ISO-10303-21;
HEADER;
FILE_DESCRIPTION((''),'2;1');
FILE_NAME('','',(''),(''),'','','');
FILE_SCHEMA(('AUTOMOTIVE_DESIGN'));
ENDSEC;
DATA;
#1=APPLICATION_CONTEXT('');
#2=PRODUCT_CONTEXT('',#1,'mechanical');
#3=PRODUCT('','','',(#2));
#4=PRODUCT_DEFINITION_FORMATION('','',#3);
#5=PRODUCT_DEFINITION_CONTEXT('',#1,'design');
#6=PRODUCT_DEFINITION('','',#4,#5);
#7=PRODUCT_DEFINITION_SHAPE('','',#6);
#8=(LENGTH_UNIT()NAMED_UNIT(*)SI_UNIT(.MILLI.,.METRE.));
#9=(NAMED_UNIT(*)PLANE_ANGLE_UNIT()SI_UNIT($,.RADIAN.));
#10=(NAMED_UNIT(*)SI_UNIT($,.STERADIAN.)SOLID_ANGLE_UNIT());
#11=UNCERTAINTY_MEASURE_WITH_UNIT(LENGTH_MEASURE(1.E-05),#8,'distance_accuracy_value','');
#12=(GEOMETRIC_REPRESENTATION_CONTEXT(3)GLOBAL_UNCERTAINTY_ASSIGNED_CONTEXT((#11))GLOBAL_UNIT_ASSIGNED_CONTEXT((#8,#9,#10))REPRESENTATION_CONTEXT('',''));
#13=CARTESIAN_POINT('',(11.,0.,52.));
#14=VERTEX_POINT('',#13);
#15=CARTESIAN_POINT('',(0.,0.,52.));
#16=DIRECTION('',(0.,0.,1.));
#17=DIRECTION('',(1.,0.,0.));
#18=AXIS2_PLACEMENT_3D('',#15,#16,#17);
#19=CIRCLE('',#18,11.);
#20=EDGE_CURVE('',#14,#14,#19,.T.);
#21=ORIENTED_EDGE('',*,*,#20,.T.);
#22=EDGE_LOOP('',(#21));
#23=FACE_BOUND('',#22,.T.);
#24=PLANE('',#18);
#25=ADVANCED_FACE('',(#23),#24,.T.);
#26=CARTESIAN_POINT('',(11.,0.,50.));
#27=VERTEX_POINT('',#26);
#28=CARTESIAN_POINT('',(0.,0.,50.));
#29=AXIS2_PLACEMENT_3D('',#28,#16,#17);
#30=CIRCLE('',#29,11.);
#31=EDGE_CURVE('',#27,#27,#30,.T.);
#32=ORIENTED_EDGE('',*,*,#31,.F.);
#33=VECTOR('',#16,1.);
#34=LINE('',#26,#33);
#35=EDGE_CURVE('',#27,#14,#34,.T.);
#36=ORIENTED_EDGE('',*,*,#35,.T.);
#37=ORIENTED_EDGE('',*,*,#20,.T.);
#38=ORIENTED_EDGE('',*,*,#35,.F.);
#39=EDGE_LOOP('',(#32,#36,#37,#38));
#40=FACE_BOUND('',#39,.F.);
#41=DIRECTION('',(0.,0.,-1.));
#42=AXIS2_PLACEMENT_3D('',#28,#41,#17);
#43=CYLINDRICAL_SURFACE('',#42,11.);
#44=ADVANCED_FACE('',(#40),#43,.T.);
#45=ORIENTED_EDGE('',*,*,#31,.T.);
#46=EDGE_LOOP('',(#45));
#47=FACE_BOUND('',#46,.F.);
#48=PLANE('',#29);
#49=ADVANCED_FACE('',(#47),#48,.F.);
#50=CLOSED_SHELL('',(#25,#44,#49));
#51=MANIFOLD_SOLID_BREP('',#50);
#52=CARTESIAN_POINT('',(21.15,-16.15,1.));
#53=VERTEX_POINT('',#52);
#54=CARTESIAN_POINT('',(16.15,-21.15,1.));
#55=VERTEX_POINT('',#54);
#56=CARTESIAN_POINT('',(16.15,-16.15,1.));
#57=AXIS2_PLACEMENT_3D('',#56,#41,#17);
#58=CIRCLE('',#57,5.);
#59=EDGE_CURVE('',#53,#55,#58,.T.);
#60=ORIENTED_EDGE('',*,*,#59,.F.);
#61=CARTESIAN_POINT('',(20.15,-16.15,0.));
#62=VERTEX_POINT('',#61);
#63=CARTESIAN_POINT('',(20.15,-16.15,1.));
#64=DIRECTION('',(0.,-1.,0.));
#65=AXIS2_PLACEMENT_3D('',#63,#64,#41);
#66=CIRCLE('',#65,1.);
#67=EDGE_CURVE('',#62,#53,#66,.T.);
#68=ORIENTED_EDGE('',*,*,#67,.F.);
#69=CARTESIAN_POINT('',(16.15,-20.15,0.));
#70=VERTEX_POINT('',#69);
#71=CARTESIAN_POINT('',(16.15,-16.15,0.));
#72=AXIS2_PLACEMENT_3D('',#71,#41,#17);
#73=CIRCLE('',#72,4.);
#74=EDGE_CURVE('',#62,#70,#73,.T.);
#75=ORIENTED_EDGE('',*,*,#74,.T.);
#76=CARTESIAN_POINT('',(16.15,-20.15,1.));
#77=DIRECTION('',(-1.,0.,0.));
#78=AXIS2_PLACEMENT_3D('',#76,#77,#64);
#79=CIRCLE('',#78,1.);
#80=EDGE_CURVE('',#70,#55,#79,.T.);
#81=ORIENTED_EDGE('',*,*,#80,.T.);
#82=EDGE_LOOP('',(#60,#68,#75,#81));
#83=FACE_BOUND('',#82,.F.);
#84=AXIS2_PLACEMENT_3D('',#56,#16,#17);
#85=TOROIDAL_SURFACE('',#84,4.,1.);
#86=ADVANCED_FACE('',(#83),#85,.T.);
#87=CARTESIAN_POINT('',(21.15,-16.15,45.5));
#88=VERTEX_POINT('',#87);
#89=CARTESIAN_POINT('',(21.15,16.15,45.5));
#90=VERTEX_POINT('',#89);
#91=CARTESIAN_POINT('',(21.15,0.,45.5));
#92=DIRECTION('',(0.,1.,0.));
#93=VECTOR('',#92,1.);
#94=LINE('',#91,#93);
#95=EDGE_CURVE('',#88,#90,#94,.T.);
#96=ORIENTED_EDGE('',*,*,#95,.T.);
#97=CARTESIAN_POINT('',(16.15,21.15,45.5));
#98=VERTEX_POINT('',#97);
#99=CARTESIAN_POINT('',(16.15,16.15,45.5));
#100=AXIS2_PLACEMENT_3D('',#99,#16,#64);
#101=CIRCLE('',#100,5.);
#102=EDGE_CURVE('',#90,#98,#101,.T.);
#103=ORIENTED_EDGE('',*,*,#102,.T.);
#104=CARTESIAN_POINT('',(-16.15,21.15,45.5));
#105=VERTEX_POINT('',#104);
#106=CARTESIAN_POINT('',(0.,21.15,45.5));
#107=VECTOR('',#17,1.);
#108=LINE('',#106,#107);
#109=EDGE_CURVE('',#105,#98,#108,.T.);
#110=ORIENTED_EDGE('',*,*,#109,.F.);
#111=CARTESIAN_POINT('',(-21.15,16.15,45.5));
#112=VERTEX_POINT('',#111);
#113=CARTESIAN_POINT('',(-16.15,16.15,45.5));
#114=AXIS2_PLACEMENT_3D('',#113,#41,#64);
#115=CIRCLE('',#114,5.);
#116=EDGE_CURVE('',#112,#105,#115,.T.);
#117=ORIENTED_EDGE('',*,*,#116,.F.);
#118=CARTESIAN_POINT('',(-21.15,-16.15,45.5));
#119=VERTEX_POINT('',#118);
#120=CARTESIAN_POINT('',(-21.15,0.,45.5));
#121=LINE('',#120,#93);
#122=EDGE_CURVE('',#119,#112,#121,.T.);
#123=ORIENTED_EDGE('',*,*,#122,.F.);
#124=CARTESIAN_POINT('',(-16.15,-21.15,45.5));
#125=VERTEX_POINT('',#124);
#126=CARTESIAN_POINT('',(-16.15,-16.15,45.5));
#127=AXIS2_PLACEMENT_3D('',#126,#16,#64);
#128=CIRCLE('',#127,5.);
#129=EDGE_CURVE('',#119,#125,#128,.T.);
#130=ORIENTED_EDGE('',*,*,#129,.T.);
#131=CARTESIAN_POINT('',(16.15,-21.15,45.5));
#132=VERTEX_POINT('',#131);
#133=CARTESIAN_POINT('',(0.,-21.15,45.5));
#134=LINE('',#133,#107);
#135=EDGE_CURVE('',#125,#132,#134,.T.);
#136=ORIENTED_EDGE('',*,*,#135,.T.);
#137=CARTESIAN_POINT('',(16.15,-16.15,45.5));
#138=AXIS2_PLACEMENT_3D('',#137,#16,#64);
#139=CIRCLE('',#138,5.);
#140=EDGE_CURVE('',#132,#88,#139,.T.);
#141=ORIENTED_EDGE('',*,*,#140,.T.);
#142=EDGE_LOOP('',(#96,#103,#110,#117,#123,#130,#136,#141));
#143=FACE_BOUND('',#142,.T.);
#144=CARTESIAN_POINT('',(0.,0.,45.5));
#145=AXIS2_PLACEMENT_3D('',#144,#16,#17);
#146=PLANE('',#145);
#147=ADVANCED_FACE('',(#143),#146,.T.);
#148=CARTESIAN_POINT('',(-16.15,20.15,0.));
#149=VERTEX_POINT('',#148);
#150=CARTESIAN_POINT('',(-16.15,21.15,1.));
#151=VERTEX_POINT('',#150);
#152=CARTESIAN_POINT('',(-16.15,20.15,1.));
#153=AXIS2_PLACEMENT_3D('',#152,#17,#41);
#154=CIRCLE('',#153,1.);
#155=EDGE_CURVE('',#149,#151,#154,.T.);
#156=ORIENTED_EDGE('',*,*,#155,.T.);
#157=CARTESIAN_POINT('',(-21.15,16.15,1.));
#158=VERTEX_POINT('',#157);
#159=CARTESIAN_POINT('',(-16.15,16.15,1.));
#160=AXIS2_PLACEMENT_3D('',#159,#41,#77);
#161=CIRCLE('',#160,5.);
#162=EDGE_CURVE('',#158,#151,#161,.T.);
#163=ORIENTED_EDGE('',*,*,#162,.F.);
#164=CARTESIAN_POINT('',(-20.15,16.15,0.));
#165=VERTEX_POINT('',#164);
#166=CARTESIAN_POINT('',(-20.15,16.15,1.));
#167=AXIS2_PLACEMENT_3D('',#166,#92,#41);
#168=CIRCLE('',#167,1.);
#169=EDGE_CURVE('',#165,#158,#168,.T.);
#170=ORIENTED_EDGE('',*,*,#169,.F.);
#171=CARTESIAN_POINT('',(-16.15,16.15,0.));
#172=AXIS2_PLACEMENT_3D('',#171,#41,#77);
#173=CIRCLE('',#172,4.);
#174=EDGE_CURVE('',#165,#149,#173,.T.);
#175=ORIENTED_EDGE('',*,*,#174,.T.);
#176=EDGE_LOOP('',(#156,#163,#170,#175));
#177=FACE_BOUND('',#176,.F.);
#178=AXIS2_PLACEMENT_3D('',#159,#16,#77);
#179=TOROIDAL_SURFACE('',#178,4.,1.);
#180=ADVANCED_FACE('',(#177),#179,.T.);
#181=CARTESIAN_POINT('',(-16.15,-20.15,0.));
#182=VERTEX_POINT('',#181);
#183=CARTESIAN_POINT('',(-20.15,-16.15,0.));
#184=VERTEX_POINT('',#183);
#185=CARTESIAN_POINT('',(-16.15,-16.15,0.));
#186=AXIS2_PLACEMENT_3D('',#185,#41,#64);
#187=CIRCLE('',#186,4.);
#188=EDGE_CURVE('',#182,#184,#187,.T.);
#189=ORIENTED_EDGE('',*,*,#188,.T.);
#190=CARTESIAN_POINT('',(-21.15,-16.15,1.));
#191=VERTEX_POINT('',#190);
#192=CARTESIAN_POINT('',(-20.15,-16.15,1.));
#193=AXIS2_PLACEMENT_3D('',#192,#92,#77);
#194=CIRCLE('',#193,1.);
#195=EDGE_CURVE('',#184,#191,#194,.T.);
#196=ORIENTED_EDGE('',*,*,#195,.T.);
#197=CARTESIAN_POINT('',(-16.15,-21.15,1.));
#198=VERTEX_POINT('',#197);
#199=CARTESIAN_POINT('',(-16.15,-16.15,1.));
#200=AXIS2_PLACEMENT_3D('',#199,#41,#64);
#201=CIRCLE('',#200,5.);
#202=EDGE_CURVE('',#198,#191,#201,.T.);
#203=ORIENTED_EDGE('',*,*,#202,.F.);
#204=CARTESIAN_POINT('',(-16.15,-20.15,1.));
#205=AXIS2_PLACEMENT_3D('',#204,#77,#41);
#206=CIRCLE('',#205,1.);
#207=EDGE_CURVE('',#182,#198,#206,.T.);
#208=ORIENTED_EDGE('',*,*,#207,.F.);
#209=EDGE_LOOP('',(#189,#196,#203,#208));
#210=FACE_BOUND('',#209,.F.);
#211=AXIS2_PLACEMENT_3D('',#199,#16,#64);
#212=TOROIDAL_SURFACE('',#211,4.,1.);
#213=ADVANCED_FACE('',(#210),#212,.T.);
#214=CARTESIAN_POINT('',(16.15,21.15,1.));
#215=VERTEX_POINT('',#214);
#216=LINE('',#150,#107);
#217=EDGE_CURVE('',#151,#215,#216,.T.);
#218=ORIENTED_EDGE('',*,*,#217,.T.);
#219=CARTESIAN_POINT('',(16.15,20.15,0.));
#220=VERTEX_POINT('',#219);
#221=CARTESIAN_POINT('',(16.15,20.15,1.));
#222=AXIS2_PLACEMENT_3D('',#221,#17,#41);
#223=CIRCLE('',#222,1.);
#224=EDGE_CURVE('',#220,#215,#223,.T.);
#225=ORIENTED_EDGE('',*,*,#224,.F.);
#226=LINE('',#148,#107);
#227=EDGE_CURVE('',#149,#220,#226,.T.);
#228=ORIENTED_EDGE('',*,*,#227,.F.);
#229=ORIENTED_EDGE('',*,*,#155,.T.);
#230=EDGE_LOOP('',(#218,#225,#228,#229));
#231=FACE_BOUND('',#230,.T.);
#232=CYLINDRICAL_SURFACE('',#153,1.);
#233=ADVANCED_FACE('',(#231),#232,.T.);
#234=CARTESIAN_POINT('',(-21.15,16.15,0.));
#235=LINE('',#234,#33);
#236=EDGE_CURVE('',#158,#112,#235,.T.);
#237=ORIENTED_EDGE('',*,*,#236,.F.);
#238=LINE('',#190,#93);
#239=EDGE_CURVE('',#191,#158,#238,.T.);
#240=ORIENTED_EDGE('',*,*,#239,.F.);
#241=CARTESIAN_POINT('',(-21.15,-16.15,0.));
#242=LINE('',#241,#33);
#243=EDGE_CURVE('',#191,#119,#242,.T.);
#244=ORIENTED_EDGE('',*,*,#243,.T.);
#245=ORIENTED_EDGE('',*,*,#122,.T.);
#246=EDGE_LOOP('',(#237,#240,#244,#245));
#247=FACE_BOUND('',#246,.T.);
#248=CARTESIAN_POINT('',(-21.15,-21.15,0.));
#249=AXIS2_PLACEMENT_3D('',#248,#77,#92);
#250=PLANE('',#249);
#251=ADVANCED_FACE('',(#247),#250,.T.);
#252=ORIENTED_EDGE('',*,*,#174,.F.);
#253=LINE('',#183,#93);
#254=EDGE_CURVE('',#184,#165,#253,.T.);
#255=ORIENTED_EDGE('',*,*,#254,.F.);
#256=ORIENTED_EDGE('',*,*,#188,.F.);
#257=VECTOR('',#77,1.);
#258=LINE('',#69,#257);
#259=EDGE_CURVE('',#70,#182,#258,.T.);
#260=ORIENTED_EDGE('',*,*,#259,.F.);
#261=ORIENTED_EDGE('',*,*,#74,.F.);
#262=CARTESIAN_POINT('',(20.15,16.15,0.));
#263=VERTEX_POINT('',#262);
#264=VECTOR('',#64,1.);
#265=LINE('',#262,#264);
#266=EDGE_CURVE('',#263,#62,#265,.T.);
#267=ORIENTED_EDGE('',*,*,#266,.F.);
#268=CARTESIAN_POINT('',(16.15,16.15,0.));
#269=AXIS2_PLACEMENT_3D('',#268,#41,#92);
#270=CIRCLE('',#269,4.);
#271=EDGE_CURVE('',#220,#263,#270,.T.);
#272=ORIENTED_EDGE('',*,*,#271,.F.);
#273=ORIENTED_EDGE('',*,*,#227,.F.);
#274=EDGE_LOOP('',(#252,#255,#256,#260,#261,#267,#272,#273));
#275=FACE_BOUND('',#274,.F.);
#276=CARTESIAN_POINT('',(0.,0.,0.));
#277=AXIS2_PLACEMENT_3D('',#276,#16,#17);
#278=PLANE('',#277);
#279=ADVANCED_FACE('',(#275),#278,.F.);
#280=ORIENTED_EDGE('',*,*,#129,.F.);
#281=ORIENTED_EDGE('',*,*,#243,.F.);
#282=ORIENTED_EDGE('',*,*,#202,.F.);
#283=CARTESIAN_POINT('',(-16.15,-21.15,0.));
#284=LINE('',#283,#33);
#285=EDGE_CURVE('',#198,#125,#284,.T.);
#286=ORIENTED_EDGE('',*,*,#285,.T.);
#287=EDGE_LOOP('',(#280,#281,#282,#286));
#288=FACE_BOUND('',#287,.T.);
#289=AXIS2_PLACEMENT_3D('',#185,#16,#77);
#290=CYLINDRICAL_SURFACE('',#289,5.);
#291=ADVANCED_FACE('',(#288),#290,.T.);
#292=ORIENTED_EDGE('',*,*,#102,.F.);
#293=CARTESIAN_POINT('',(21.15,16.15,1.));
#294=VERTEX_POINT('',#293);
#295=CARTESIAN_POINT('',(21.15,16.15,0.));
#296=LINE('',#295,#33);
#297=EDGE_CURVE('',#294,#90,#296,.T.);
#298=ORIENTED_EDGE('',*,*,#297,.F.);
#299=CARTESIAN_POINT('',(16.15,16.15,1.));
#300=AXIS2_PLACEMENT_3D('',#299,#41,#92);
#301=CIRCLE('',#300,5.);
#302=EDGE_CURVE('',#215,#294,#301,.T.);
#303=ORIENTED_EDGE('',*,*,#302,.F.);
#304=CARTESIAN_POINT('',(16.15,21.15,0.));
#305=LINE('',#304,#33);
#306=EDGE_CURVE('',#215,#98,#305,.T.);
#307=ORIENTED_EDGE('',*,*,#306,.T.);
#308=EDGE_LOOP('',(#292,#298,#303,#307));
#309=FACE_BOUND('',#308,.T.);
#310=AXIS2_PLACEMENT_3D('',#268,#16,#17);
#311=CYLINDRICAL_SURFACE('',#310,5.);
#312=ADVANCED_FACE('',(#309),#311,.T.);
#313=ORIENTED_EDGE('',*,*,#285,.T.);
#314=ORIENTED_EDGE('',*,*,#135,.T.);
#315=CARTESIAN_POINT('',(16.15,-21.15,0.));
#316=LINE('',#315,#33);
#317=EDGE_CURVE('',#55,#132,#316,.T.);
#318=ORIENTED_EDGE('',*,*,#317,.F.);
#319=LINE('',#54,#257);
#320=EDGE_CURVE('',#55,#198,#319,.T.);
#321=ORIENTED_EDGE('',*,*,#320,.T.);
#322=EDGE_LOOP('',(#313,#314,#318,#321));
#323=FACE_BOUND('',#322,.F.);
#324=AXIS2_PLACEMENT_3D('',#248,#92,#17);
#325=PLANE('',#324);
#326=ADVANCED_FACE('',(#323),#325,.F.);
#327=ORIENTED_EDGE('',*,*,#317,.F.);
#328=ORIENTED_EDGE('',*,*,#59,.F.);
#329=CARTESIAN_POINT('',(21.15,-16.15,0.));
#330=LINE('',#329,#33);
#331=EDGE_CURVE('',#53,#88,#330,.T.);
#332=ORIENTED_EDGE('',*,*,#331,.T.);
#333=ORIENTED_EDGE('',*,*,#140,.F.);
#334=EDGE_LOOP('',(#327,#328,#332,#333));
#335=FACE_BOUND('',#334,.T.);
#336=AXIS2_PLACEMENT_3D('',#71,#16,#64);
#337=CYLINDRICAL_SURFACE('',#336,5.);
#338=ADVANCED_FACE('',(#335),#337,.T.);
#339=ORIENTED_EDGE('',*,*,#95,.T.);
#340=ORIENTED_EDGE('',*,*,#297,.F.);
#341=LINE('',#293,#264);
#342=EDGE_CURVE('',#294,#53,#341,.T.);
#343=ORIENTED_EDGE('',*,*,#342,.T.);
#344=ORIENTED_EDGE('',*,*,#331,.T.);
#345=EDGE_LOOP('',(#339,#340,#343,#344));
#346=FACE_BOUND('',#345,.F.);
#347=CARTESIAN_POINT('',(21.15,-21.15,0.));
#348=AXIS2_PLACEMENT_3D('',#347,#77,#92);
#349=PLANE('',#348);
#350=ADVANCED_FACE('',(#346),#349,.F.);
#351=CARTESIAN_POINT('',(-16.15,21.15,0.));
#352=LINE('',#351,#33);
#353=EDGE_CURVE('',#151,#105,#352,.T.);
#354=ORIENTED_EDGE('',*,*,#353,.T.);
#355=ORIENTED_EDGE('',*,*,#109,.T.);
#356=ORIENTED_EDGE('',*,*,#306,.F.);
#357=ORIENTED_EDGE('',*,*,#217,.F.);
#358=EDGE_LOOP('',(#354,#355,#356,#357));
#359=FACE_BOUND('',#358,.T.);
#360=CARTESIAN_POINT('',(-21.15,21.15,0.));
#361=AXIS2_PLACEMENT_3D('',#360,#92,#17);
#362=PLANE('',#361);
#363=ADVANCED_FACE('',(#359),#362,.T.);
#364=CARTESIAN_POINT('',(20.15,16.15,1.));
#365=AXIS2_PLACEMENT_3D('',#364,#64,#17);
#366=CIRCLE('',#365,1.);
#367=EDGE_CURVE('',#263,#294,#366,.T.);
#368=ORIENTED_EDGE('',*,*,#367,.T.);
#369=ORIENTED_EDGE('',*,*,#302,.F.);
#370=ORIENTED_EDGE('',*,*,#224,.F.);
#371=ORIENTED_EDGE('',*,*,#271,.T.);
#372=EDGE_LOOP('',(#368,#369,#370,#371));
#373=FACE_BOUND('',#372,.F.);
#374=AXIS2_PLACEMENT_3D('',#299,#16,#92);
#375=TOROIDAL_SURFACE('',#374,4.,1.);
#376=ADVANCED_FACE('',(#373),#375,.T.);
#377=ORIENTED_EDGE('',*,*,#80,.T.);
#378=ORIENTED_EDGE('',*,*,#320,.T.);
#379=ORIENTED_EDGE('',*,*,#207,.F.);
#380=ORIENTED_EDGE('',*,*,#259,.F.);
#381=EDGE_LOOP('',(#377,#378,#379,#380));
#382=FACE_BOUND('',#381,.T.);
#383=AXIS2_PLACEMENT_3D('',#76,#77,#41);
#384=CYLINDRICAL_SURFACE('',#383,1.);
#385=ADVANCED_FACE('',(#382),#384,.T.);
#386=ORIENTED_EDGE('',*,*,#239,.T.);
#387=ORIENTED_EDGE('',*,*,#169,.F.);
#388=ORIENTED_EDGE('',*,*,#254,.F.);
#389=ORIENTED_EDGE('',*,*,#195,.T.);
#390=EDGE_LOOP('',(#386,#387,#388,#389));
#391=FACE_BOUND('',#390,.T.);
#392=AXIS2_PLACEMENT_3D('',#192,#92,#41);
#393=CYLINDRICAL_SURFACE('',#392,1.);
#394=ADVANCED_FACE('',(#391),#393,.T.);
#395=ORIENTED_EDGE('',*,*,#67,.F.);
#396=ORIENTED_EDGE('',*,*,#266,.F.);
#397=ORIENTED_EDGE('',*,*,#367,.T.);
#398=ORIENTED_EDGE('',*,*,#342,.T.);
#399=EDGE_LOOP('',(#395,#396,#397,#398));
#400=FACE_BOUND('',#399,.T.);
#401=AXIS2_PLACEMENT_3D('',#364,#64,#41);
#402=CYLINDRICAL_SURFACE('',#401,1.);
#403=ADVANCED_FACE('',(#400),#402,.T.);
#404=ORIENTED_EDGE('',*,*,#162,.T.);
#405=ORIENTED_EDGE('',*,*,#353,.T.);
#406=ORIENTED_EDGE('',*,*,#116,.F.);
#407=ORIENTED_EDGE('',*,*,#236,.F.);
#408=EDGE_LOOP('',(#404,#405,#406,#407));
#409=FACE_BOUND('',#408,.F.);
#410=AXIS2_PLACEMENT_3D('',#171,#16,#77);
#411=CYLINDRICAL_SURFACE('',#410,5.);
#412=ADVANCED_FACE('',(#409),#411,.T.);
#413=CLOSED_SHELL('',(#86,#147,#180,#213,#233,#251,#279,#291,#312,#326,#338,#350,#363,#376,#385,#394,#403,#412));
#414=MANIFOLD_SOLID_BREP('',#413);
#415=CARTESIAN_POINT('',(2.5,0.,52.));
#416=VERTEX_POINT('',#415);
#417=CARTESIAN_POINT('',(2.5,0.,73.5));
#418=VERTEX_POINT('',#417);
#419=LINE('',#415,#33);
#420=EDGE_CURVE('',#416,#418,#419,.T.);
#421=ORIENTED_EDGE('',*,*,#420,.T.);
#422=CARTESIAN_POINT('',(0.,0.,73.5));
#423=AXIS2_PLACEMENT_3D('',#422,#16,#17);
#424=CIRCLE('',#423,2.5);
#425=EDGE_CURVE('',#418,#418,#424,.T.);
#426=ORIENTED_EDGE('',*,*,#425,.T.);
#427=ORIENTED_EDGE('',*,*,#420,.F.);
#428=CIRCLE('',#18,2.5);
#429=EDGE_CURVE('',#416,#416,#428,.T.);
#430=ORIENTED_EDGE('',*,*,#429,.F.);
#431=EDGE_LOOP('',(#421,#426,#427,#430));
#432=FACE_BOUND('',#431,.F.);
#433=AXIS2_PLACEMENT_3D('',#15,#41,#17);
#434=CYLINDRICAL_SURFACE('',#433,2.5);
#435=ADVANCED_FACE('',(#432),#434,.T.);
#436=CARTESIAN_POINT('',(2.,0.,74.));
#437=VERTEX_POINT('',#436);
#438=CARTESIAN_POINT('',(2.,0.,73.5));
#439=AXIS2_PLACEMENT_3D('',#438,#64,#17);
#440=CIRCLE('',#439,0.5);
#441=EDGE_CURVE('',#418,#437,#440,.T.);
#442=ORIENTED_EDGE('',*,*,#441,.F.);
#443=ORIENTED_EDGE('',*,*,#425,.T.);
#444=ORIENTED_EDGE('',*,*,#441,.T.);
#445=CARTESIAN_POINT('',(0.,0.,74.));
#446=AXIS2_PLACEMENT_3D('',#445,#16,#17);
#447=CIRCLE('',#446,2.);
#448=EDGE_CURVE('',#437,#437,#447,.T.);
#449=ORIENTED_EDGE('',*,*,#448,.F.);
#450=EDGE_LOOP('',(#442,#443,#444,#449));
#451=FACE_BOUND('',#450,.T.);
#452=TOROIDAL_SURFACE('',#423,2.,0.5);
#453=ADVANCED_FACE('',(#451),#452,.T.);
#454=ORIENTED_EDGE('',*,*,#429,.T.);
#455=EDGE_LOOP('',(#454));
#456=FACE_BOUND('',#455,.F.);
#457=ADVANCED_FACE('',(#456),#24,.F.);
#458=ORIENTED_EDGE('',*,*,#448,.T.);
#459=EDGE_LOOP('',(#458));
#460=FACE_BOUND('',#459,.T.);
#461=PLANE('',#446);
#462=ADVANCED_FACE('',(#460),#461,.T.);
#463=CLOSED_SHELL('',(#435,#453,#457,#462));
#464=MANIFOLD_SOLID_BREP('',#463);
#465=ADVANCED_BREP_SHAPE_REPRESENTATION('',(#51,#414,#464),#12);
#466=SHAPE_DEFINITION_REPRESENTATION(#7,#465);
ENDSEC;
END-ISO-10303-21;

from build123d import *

# Parameters (mm, degrees)
F1_W     = 42.3
F1_H     = 42.3
F1_R     = 1.5
F1_R_2   = 11
F1_R_3   = 2.5
F2_DEPTH = 45.5
F3_START = 50
F3_DEPTH = 2
F4_START = 52
F4_DEPTH = 22
F5_R     = 0.5
F6_R     = 5
F7_R     = 1


with BuildPart() as f2:
    # F1 (on Top) → F2 (new body)
    with BuildSketch(Plane.XY):
        Rectangle(F1_W, F1_H)
        with Locations((-15.5, -15.5)):
            Circle(F1_R, mode=Mode.SUBTRACT)
        with Locations((15.5, -15.5)):
            Circle(F1_R, mode=Mode.SUBTRACT)
        with Locations((-15.5, 15.5)):
            Circle(F1_R, mode=Mode.SUBTRACT)
        Circle(F1_R_2, mode=Mode.SUBTRACT)
        with Locations((15.5, 15.5)):
            Circle(F1_R, mode=Mode.SUBTRACT)
        Circle(F1_R_2)
        Circle(F1_R_3, mode=Mode.SUBTRACT)
        Circle(F1_R_3)
        with Locations((-15.5, 15.5)):
            Circle(F1_R)
        with Locations((-15.5, -15.5)):
            Circle(F1_R)
        with Locations((15.5, -15.5)):
            Circle(F1_R)
        with Locations((15.5, 15.5)):
            Circle(F1_R)
    extrude(amount=F2_DEPTH)

    # F6
    f6_edges = [f2.edges().sort_by_distance(p)[0] for p in [
        (21.15, 21.15, 22.75),
        (-21.15, 21.15, 22.75),
        (-21.15, -21.15, 22.75),
        (21.15, -21.15, 22.75),
    ]]
    fillet(f6_edges, radius=F6_R)

    # F7
    f7_edges = [f2.edges().sort_by_distance(p)[0] for p in [
        (0, 21.15, 0),
        (19.685534, 19.685534, 0),
        (-19.685534, 19.685534, 0),
        (21.15, 0, 0),
        (-21.15, 0, 0),
        (19.685534, -19.685534, 0),
        (-19.685534, -19.685534, 0),
        (0, -21.15, 0),
    ]]
    fillet(f7_edges, radius=F7_R)


with BuildPart() as f3:
    # F1 (on Top) → F3 (new body)
    with BuildSketch(Plane.XY.offset(F3_START)):
        Circle(F1_R_2)
        Circle(F1_R_3, mode=Mode.SUBTRACT)
        Circle(F1_R_3)
    extrude(amount=F3_DEPTH)


with BuildPart() as f4:
    # F1 (on Top) → F4 (new body)
    with BuildSketch(Plane.XY.offset(F4_START)):
        Circle(F1_R_3)
    extrude(amount=F4_DEPTH)

    # F5
    f5_edges = [f4.edges().sort_by_distance(p)[0] for p in [
        (-2.5, 0, 74),
    ]]
    fillet(f5_edges, radius=F5_R)


solid = Compound([f2.part, f3.part, f4.part])
